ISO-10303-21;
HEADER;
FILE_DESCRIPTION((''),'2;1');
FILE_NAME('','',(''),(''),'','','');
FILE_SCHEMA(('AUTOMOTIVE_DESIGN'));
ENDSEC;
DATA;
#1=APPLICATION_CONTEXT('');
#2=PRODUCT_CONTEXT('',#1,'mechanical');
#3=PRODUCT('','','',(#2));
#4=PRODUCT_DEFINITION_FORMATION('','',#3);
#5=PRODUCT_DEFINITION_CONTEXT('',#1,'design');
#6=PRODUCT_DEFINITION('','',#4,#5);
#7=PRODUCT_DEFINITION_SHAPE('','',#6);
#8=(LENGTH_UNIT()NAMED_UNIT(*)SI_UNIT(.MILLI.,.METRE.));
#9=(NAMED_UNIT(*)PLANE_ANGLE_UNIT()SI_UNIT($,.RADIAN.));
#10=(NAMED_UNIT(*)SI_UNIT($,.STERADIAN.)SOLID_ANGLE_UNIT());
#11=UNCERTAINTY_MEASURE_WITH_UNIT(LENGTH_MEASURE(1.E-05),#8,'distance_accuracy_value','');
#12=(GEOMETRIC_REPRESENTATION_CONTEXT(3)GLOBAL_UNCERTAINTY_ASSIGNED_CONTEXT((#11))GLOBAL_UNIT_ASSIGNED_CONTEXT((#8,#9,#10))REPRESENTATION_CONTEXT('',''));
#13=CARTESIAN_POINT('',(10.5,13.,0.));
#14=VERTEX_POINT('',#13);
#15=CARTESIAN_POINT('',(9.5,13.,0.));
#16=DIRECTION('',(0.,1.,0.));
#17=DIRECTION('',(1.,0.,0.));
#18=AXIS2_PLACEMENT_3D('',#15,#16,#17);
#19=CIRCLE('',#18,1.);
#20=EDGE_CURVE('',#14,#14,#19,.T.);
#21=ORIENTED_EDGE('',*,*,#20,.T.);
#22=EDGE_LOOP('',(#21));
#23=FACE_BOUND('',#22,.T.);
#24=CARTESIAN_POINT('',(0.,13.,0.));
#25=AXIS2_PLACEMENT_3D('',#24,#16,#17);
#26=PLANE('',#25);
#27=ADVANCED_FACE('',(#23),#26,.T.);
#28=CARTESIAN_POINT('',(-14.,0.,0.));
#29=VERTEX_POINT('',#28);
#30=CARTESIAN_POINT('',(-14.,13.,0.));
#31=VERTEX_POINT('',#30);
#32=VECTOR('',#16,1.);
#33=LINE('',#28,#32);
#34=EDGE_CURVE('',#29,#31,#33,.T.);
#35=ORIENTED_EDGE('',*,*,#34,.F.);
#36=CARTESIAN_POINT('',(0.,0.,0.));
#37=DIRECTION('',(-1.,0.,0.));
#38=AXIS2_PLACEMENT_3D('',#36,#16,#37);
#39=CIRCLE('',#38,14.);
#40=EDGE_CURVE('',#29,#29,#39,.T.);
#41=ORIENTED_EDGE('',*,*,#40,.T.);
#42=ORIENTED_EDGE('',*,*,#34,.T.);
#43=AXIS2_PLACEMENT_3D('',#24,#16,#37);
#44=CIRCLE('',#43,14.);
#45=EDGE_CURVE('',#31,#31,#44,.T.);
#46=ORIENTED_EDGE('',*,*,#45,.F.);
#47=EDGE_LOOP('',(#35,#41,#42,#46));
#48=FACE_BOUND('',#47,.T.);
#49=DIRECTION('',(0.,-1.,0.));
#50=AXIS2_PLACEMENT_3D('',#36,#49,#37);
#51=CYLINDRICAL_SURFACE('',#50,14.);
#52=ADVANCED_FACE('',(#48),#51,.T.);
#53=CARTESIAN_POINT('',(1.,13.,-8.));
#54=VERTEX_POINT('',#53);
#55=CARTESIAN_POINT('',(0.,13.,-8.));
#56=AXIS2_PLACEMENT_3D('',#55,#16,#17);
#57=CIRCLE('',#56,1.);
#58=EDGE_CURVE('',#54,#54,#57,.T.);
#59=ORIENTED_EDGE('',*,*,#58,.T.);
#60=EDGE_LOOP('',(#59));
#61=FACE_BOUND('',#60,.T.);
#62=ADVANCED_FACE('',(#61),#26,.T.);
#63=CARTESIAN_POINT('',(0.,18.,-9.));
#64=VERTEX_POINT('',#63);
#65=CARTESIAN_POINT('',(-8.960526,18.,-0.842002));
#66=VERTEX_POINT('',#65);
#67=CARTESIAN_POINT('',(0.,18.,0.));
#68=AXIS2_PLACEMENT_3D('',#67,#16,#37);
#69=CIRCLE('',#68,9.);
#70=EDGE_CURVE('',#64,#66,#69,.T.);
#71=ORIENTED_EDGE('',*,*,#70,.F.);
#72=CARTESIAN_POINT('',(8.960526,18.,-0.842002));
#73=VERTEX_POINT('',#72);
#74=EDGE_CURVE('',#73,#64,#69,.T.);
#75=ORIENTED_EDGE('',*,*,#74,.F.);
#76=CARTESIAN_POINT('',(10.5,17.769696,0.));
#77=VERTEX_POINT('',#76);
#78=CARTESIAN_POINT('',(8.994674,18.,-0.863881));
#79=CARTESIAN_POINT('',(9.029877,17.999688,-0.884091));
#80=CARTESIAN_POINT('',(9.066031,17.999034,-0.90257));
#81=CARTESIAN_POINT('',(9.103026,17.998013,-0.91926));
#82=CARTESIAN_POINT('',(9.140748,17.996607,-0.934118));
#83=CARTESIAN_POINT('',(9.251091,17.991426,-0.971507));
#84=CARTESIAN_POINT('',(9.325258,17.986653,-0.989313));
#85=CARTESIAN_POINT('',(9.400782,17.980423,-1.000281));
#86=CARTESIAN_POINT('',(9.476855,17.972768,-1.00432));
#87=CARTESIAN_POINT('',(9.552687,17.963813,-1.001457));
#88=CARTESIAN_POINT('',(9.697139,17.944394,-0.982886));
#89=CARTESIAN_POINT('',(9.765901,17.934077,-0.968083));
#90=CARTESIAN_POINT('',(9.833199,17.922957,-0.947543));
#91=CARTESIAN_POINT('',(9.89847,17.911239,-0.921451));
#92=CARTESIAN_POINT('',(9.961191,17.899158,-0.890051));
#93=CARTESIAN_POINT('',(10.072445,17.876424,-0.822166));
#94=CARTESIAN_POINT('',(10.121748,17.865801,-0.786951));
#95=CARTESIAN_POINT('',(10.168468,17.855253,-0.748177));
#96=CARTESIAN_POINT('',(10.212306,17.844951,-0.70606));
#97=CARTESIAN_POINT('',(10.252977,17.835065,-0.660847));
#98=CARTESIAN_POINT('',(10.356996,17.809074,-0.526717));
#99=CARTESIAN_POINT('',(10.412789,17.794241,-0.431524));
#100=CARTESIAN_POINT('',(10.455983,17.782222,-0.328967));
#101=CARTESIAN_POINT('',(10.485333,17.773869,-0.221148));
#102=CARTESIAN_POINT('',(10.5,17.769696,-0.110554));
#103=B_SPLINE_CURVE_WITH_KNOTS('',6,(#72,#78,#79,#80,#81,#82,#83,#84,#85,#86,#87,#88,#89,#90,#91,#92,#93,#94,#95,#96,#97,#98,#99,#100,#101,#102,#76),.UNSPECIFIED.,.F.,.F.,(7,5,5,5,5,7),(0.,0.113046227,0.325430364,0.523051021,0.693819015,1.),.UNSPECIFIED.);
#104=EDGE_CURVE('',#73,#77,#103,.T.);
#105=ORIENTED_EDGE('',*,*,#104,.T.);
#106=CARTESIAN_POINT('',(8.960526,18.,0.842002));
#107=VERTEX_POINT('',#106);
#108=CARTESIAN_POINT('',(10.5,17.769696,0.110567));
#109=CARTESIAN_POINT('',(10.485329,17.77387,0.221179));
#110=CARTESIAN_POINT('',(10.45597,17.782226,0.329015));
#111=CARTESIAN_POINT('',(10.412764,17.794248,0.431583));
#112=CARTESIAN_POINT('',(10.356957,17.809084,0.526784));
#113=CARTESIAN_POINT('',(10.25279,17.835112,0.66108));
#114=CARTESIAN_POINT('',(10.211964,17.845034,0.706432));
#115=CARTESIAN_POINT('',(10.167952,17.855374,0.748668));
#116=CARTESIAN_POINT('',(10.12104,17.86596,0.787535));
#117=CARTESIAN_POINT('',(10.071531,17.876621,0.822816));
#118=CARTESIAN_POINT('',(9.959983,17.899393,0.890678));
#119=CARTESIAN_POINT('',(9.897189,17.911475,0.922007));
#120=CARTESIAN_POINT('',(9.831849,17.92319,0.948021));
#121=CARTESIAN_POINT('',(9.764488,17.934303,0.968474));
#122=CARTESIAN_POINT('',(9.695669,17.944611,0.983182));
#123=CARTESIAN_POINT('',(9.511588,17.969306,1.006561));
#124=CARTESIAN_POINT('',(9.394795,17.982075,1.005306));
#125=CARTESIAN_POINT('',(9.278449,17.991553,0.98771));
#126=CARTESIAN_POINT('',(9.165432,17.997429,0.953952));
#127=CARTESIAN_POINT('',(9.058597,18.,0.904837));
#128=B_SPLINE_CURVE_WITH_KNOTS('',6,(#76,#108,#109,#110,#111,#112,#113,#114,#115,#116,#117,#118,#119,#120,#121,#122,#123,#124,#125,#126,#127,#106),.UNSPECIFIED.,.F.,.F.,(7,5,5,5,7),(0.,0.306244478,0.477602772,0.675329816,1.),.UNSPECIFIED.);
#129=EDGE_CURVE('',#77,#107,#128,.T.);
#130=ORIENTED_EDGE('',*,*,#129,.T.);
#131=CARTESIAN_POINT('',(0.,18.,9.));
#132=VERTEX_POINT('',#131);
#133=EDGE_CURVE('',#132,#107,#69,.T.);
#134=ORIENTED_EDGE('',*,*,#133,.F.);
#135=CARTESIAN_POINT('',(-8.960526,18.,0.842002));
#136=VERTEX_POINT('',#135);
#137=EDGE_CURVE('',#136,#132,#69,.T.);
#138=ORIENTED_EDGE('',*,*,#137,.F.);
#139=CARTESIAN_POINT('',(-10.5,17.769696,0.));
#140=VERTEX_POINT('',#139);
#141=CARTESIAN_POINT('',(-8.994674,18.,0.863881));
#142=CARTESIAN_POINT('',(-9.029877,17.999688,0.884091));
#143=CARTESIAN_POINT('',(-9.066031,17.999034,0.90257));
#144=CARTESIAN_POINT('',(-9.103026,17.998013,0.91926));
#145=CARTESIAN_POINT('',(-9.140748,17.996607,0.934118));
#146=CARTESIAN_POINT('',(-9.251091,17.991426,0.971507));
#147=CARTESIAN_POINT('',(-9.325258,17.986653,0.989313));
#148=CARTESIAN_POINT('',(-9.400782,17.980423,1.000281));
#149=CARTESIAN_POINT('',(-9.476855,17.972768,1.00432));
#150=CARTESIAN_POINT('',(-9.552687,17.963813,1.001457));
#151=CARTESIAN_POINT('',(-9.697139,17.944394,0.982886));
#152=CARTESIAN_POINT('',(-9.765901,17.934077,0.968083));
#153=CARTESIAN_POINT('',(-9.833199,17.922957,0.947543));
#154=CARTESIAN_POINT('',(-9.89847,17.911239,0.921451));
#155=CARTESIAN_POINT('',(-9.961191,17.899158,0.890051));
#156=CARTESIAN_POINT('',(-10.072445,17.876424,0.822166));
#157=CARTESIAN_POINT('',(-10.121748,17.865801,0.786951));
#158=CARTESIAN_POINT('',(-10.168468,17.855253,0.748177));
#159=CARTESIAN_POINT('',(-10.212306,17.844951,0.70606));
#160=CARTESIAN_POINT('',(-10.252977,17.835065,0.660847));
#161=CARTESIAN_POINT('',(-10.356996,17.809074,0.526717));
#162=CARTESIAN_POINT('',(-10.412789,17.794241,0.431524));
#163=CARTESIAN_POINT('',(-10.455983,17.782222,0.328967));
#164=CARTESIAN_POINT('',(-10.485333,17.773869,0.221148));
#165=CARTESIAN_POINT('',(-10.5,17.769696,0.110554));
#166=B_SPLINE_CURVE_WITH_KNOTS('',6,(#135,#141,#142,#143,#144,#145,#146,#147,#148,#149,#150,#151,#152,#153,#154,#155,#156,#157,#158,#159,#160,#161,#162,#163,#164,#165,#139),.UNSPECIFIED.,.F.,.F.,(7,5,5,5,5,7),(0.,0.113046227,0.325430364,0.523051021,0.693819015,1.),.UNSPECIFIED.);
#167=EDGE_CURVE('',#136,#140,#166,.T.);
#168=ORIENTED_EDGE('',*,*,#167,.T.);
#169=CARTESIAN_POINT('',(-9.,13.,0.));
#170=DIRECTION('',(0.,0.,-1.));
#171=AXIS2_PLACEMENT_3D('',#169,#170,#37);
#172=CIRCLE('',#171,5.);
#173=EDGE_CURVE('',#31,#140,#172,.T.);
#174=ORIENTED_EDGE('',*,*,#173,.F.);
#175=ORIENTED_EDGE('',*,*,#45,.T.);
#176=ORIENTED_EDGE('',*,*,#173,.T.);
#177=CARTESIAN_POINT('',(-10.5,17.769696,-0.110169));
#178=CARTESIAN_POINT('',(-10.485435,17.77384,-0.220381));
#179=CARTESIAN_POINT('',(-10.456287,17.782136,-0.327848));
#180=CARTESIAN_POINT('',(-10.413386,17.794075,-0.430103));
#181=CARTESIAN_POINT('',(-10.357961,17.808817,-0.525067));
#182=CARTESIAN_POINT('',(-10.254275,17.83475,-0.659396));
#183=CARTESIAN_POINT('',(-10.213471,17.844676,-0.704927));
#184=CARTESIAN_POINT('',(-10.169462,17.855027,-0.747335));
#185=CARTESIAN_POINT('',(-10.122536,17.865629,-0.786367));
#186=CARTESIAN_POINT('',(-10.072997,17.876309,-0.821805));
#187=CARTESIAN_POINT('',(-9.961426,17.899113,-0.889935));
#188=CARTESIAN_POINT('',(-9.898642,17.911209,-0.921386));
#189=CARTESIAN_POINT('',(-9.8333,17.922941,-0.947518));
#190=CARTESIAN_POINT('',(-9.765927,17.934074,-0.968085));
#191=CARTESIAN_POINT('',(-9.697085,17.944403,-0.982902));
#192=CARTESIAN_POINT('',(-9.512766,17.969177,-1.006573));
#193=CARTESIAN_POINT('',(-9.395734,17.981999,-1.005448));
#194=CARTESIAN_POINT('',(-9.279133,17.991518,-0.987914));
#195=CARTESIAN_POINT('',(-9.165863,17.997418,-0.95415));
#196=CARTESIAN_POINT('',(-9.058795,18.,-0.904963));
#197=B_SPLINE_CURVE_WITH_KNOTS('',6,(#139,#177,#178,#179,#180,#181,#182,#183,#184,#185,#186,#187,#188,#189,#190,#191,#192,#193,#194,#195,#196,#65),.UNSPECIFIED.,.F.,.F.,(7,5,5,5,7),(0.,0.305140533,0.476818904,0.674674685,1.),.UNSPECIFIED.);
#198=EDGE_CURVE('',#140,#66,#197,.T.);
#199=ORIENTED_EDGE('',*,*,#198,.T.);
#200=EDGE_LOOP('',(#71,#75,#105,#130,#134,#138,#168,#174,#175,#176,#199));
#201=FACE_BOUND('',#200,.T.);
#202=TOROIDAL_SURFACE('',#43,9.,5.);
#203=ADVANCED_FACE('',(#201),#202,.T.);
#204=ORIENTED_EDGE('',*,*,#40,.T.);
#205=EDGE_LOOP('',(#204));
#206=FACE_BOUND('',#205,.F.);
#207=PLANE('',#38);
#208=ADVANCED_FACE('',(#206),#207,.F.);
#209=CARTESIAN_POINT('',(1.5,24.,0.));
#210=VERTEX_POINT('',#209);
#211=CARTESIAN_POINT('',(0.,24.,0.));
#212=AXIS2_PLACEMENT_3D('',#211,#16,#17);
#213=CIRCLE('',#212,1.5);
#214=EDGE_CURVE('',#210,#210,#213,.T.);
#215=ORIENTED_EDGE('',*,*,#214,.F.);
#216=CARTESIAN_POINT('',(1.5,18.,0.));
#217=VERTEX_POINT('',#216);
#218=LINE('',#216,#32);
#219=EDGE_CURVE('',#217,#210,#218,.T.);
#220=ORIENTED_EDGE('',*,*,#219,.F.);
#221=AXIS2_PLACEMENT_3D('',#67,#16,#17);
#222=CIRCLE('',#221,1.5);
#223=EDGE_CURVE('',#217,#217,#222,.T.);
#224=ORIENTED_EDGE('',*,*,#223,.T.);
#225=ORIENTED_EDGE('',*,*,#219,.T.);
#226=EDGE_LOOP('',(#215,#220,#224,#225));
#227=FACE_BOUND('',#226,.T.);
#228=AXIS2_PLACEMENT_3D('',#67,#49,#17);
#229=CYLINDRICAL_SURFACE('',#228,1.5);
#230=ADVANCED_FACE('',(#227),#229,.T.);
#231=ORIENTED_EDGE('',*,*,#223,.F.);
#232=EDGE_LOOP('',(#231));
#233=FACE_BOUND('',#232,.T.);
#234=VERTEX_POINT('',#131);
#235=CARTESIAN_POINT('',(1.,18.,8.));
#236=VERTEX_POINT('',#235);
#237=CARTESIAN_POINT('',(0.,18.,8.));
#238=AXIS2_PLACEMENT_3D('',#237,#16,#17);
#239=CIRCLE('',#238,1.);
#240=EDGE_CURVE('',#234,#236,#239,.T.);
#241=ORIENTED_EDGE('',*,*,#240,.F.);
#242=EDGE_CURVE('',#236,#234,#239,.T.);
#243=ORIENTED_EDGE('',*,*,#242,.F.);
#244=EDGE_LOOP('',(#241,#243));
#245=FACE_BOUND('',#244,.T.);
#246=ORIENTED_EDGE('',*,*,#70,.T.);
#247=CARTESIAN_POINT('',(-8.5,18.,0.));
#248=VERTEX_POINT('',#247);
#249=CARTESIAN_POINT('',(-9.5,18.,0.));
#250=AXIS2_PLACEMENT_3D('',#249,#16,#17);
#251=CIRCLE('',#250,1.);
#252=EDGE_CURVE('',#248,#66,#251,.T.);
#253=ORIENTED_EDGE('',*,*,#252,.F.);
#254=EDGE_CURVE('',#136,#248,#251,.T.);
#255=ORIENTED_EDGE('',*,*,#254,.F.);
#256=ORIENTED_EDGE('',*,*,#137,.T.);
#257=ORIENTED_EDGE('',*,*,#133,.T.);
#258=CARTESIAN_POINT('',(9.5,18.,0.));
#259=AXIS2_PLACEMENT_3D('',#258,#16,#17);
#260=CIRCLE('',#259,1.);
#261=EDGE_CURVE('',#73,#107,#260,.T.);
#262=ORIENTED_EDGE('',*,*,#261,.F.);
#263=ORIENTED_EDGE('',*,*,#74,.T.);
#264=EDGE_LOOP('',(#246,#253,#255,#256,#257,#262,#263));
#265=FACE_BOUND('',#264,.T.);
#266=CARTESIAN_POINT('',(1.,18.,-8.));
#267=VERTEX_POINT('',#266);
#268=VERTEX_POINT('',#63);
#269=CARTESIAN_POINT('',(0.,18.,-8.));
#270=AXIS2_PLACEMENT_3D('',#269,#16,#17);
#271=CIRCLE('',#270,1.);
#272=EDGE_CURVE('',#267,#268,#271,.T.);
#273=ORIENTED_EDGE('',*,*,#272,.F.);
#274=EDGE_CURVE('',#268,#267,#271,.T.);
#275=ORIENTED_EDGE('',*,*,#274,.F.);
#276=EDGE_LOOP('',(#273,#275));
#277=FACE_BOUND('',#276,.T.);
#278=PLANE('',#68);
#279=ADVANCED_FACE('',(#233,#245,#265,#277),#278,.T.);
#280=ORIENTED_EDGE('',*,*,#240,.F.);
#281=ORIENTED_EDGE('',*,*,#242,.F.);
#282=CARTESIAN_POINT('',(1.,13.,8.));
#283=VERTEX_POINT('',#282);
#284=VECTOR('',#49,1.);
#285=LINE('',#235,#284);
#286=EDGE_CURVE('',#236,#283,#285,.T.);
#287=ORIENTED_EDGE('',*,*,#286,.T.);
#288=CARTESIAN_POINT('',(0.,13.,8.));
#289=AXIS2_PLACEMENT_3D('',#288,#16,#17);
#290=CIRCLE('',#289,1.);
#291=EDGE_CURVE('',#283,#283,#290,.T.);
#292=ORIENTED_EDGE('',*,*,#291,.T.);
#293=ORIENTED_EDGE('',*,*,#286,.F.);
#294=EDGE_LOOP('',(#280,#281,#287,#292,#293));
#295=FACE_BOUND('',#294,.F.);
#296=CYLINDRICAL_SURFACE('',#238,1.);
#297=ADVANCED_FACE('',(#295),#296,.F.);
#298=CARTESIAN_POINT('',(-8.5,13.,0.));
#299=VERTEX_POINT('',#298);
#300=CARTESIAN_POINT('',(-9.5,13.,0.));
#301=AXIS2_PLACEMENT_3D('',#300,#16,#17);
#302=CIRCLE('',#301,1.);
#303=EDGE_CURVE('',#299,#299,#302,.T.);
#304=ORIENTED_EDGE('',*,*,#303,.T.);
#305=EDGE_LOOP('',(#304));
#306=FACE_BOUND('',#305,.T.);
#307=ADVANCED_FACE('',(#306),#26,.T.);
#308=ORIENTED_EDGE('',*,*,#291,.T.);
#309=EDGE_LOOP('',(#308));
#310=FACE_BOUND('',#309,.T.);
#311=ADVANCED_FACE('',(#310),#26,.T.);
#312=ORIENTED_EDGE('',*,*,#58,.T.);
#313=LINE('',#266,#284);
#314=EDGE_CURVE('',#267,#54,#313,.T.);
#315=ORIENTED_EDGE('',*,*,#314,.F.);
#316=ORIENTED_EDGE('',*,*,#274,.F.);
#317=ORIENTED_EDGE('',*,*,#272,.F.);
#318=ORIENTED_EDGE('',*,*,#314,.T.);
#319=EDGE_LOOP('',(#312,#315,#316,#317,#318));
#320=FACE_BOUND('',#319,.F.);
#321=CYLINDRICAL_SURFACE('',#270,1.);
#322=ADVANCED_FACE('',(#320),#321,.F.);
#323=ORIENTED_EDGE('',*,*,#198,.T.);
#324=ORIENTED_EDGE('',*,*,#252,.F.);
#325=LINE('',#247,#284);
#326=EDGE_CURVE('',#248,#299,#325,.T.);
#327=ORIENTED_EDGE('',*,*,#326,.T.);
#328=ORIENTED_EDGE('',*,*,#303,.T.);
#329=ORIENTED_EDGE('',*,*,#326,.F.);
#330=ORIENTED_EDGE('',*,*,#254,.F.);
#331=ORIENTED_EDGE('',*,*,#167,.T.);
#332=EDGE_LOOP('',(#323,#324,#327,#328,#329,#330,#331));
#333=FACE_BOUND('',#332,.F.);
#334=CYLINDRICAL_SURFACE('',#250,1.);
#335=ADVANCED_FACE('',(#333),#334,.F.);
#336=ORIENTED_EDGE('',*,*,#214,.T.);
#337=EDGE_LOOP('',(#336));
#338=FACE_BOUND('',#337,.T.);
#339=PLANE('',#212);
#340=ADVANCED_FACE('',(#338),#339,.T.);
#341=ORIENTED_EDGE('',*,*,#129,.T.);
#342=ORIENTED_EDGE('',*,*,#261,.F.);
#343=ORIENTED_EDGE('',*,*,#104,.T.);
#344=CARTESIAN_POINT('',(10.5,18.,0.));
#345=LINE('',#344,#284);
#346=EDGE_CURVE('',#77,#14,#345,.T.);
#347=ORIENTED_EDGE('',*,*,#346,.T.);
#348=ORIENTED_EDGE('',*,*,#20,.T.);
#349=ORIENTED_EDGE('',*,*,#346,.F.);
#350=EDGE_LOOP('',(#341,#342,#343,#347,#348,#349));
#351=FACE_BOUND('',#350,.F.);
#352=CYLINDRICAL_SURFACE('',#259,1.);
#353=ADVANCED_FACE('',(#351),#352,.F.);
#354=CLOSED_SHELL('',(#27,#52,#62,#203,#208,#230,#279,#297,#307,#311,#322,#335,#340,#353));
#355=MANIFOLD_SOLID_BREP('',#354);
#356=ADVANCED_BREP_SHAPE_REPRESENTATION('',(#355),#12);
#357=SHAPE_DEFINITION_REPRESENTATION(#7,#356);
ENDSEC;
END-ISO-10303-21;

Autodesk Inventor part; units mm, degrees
ref_plane "YZ Plane" through (0, 0, 0) normal (1, 0, 0) x (0, 1, 0)
ref_plane "XZ Plane" through (0, 0, 0) normal (0, 1, 0) x (-1, 0, 0)
ref_plane "XY Plane" through (0, 0, 0) normal (0, 0, 1) x (1, 0, 0)
sketch "Эскиз1" plane through (0, 0, 0) normal (0, 1, 0) x (-1, 0, 0)
  circle A0 centre (0, 0) radius 14
  dimension "d0" = 28
extrude "Выдавливание1" add sketch "Эскиз1" along normal blind 18
sketch "Эскиз2" plane through (0, 18, 0) normal (0, 1, 0) x (1, 0, 0)
  circle A0 centre (0, 0) radius 1.5
  dimension "d3" = 3
extrude "Выдавливание2" add sketch "Эскиз2" along normal blind 6
sketch "Эскиз3" plane through (0, 18, 0) normal (0, 1, 0) x (1, 0, 0)
  circle A0 centre (0, 8) radius 1
  circle A1 centre (0, -8) radius 1
  circle A2 centre (-9.5, 0) radius 1
  circle A3 centre (9.5, 0) radius 1
  point P0 (0, 0)
  dimension "d6" = 2
  dimension "d7" = 2
  dimension "d8" = 2
  dimension "d9" = 2
  dimension "d10" = 8
  dimension "d11" = 8
  dimension "d12" = 9.5
  dimension "d13" = 9.5
extrude "Выдавливание3" cut sketch "Эскиз3" against normal blind 5
fillet "Сопряжение1" radius 5 1 edges at (14, 18, 0)
properties part number "motor_c2822"
